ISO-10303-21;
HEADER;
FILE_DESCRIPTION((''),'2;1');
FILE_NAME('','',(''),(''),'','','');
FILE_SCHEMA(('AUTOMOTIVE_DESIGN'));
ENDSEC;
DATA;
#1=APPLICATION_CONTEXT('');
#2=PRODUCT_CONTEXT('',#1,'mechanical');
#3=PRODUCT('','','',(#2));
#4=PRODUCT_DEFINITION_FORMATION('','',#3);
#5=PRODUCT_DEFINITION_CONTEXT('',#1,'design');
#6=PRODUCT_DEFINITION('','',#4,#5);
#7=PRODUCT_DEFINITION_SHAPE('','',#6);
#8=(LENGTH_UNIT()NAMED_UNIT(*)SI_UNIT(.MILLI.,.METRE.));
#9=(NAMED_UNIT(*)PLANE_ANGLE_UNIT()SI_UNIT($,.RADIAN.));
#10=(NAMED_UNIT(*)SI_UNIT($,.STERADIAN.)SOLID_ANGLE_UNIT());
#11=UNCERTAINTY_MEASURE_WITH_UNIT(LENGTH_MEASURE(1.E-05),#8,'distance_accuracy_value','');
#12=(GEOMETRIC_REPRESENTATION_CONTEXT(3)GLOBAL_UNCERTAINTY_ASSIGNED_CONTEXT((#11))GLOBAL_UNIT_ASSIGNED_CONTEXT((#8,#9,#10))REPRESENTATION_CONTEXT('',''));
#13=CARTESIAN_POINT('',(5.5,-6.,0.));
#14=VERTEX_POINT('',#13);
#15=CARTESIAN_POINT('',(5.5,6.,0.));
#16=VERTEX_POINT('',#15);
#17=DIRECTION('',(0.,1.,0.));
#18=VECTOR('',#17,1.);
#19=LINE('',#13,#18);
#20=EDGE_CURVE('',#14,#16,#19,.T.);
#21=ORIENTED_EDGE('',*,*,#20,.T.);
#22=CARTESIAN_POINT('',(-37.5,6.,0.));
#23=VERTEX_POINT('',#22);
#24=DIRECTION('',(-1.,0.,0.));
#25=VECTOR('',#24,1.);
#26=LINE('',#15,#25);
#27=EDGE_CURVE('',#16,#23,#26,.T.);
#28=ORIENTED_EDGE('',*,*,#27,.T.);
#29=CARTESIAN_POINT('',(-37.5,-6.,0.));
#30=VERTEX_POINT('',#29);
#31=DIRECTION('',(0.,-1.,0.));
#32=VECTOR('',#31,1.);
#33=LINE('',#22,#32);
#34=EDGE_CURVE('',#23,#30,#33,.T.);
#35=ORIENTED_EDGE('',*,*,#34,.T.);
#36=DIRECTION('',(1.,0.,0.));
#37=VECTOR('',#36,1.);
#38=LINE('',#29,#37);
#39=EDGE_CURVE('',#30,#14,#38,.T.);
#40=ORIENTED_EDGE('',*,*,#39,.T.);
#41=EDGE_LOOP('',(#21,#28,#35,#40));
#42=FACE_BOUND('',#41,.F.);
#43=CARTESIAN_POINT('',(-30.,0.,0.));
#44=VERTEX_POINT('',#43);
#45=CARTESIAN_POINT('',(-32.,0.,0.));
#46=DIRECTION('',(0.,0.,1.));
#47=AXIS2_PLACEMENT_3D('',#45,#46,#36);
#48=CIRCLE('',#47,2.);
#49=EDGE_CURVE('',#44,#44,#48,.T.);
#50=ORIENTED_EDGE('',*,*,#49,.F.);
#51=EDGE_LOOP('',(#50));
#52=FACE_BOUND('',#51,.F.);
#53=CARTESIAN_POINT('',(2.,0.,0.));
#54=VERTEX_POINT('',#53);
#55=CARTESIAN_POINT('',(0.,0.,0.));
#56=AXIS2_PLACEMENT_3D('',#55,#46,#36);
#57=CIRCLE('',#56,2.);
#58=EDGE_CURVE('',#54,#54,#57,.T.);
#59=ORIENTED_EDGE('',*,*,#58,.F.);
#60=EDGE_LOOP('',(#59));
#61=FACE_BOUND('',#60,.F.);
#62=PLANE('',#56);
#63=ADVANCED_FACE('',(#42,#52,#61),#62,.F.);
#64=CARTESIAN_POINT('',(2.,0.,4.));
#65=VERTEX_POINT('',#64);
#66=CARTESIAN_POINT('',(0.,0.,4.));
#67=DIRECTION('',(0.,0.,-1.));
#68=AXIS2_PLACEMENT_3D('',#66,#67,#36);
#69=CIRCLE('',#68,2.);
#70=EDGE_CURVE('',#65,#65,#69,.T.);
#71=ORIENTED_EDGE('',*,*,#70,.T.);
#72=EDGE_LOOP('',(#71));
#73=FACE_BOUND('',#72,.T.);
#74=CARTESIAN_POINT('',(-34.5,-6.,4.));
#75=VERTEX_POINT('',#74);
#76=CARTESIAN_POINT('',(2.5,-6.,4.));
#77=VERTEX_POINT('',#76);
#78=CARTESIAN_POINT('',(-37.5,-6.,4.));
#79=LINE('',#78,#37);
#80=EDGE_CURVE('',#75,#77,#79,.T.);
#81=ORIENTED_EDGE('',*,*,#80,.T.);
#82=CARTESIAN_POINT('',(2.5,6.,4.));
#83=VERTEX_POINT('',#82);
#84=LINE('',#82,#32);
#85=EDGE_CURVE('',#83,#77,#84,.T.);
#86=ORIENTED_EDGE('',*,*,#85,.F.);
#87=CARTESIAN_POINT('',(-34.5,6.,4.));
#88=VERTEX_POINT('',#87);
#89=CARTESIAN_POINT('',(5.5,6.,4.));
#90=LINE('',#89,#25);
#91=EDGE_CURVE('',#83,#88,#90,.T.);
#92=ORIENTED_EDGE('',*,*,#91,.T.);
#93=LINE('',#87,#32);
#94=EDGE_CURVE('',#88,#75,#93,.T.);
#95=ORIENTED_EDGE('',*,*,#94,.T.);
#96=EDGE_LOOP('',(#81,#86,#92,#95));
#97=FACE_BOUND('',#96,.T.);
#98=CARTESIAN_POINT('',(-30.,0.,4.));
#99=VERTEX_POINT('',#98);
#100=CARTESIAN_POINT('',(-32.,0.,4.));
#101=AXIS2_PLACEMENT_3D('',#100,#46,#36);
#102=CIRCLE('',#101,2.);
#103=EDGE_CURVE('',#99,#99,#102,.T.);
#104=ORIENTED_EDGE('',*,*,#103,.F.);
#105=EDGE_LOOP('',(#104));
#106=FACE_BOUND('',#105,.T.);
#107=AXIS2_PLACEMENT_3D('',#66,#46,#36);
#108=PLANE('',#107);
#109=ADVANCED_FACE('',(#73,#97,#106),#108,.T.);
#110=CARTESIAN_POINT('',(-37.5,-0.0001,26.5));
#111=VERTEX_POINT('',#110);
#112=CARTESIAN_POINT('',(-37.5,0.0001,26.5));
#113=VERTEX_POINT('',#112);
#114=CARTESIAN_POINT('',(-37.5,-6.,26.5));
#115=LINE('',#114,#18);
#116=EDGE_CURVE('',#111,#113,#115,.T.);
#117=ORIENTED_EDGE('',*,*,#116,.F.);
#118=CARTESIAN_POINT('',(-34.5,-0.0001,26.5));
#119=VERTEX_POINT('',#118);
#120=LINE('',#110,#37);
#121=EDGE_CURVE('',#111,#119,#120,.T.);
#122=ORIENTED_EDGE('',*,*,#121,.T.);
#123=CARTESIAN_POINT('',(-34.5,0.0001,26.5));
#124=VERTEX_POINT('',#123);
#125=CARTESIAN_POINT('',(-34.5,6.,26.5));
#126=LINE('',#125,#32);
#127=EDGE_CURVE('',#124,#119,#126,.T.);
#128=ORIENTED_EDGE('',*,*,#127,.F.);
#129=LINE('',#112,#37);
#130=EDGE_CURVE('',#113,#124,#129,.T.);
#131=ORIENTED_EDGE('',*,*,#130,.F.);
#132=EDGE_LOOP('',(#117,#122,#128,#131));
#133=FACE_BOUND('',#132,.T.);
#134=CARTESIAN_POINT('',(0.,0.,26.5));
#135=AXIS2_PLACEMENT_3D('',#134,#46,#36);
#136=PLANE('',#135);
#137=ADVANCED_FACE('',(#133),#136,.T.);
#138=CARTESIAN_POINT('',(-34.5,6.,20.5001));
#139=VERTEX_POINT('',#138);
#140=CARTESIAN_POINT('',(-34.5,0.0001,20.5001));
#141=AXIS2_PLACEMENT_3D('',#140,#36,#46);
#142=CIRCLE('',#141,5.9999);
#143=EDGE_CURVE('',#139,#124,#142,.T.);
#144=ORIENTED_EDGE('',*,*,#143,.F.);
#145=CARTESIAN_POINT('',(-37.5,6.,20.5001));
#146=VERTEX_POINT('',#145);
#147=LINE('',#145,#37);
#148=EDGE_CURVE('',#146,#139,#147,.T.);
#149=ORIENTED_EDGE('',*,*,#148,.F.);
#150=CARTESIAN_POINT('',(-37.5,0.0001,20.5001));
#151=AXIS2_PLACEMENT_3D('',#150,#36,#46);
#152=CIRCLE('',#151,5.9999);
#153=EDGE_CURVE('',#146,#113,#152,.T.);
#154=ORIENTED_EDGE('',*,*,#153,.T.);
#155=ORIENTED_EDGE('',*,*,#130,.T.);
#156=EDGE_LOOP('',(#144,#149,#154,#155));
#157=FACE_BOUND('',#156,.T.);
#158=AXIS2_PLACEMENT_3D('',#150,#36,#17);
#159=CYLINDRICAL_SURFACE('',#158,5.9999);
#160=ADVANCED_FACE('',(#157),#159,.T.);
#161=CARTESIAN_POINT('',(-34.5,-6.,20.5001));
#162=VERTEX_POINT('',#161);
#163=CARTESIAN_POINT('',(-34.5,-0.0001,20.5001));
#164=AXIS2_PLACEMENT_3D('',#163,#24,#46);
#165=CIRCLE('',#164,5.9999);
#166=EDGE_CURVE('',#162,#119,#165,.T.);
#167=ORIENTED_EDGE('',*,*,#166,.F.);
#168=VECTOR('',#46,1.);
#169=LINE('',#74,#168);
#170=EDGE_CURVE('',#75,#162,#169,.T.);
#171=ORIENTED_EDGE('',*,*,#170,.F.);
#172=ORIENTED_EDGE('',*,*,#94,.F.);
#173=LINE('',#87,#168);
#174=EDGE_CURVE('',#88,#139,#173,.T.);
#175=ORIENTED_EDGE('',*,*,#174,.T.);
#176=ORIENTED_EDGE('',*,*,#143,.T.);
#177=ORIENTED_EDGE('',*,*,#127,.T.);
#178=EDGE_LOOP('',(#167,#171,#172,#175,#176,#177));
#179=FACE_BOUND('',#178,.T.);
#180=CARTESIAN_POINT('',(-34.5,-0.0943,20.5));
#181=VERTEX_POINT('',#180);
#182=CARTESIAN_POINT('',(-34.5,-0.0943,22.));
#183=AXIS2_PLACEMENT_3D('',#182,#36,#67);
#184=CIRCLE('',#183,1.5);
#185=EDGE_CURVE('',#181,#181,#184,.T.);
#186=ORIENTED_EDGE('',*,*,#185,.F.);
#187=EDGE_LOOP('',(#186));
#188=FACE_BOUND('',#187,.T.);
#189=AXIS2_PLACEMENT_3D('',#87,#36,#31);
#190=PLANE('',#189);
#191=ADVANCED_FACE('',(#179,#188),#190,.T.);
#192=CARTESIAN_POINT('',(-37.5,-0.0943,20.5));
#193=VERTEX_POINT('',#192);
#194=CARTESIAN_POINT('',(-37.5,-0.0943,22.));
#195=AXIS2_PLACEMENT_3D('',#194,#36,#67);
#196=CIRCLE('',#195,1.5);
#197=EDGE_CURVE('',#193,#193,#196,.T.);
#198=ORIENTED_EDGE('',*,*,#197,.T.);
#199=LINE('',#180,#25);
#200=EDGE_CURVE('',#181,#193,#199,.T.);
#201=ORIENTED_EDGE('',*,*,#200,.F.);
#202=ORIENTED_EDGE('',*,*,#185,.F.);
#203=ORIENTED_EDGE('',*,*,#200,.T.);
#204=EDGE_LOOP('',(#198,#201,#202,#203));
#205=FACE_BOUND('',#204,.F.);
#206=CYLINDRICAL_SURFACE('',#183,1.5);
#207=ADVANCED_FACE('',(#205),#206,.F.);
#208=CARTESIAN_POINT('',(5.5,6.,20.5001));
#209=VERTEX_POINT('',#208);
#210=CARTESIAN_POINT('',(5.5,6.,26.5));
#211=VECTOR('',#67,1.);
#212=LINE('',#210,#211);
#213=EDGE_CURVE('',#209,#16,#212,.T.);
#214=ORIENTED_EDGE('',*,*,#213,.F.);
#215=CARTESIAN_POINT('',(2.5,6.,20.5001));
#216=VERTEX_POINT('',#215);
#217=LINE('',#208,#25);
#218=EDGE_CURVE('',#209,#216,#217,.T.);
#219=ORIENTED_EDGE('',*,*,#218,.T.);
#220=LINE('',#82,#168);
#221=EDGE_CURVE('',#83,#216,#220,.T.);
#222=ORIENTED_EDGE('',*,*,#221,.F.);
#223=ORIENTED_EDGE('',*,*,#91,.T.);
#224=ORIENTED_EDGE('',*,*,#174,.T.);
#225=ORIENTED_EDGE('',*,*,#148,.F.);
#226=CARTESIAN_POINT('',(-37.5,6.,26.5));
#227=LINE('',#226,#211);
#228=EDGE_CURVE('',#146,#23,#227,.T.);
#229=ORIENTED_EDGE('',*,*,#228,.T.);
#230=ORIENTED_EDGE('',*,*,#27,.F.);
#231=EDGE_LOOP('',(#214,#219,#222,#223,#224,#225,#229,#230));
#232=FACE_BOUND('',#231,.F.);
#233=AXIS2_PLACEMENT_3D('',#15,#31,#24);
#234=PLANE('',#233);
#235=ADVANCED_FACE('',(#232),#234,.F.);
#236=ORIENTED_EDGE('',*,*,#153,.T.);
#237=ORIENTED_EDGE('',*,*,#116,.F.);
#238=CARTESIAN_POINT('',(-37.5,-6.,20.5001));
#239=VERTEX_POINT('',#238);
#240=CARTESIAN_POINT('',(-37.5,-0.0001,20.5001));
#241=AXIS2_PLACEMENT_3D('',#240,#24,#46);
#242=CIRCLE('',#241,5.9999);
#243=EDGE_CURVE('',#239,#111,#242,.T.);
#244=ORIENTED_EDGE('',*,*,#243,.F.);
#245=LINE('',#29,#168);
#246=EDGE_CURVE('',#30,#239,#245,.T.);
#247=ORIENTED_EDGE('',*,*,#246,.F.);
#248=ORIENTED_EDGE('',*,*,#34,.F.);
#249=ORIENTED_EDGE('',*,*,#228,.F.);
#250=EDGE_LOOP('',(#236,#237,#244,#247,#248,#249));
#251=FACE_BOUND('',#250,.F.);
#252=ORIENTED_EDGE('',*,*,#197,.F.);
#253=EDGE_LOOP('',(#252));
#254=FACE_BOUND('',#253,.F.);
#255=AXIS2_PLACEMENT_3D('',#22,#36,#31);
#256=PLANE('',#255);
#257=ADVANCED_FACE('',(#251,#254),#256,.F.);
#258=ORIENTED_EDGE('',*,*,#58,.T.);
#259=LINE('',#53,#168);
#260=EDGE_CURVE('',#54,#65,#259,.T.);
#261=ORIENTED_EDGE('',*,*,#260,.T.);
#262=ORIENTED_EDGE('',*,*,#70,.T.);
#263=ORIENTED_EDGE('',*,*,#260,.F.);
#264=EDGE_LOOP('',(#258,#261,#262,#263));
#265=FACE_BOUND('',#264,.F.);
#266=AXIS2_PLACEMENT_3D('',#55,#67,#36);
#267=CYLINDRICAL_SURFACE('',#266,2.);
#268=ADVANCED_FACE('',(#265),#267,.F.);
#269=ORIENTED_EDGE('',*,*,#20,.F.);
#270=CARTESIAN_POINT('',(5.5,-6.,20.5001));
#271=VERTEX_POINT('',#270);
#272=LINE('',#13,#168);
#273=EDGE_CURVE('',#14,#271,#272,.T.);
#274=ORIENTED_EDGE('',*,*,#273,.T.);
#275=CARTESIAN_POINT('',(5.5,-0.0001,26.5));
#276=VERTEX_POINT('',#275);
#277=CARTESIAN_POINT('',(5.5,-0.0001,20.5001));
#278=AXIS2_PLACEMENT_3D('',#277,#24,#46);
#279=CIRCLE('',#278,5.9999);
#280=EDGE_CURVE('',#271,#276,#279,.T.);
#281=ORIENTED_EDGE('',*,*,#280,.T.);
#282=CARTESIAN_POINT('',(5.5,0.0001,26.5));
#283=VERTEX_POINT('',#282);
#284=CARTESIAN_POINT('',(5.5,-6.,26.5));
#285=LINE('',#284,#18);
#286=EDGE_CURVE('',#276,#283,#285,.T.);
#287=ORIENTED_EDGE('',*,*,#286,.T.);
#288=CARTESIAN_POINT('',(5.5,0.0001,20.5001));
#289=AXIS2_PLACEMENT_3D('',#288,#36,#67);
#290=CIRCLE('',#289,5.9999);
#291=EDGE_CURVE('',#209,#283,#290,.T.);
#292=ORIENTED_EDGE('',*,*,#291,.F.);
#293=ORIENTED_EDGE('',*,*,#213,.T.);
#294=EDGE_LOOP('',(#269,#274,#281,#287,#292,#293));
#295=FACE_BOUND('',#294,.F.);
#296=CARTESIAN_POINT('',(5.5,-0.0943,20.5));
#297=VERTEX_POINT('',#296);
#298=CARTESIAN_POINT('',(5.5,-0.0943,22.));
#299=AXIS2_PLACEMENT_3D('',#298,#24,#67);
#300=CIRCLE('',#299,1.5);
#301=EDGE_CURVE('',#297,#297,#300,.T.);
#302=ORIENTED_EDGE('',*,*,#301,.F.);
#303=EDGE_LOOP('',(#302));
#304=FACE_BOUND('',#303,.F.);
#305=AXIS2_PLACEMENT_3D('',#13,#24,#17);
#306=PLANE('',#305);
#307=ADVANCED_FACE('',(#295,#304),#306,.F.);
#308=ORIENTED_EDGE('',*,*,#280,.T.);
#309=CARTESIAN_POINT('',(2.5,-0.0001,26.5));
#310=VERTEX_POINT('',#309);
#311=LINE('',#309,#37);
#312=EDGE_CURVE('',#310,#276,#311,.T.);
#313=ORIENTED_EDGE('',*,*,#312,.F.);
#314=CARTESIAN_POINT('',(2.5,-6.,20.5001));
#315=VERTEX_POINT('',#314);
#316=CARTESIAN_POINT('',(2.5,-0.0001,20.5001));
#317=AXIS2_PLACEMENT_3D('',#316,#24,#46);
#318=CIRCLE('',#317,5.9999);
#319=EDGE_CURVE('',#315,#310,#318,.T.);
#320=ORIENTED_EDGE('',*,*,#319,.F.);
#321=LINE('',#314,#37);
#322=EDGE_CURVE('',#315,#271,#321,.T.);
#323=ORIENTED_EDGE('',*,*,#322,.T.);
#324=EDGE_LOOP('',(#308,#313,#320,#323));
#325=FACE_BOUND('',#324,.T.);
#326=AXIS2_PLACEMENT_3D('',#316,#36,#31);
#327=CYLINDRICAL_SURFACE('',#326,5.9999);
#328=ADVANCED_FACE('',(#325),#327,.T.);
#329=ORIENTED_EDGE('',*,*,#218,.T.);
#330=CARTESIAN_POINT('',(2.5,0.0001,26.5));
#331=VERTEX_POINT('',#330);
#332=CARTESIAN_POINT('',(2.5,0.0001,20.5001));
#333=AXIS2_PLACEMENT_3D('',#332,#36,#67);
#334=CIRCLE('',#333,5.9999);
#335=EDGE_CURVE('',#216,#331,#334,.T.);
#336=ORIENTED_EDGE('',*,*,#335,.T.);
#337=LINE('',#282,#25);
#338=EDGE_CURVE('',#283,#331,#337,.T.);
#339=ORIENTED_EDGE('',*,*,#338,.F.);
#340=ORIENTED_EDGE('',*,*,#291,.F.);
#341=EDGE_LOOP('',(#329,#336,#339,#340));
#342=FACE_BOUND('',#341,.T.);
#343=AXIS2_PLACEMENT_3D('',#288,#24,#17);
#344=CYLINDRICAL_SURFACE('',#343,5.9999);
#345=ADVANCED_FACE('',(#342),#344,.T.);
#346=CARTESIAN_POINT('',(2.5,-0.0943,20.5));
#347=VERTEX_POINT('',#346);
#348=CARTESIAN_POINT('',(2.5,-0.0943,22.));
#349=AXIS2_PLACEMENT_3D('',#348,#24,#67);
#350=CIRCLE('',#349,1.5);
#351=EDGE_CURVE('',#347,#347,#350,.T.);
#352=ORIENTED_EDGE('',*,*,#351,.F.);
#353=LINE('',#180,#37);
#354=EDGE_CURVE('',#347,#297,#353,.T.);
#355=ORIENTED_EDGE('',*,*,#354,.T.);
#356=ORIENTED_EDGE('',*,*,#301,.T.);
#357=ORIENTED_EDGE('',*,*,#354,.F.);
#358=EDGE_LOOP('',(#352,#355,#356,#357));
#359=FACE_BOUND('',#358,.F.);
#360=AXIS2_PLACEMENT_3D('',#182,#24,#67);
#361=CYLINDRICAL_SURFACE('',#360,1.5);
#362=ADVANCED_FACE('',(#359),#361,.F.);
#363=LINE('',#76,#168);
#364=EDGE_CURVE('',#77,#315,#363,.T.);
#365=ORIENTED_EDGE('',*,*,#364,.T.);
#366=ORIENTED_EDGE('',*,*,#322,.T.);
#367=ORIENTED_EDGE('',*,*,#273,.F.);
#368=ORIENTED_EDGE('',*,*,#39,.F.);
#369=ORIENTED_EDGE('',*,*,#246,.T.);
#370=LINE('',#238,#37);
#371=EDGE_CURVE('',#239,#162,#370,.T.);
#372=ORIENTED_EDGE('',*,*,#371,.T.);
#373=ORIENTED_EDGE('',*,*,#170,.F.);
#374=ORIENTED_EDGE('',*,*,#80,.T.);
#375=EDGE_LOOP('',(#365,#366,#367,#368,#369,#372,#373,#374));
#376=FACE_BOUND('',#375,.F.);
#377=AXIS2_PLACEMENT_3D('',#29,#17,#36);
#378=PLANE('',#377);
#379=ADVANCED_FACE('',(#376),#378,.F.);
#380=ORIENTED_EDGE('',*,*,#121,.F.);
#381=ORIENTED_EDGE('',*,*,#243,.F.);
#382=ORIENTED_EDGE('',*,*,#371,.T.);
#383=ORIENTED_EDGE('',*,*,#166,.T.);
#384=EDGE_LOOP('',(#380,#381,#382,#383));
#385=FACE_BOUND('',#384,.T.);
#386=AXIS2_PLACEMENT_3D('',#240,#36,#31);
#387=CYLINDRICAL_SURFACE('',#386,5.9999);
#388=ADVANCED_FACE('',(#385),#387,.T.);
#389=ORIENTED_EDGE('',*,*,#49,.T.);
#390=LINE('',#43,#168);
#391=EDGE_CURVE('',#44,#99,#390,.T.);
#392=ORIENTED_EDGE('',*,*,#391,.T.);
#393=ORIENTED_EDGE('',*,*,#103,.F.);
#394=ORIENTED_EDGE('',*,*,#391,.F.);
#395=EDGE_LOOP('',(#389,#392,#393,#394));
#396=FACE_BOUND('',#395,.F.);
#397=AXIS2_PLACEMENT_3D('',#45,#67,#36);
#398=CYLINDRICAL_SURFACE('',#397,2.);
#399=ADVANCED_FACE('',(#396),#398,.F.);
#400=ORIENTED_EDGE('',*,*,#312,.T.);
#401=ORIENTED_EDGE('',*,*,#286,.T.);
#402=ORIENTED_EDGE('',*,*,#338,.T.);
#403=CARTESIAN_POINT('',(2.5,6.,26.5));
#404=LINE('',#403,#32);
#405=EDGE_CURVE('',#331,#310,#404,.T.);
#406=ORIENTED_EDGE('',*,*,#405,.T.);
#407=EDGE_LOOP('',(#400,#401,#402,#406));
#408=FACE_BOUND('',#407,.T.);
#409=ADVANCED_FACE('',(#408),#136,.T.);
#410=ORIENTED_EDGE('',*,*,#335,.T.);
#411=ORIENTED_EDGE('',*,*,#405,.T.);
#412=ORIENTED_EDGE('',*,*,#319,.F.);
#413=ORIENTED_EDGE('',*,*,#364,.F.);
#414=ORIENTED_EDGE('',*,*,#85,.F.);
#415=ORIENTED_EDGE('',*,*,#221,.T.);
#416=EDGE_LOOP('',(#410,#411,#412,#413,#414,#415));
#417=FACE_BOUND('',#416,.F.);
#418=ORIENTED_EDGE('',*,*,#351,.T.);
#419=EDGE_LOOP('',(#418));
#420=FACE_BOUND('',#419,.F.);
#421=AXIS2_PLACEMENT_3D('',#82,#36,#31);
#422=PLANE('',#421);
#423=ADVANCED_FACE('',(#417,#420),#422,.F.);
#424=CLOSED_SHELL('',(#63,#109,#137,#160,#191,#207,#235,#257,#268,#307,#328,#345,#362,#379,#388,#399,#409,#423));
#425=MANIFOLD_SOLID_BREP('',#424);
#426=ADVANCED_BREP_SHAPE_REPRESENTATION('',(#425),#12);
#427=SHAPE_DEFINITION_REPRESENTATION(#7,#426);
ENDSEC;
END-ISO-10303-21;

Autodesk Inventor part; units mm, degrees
ref_plane "YZ Plane" through (0, 0, 0) normal (1, 0, 0) x (0, 1, 0)
ref_plane "XZ Plane" through (0, 0, 0) normal (0, 1, 0) x (-1, 0, 0)
ref_plane "XY Plane" through (0, 0, 0) normal (0, 0, 1) x (1, 0, 0)
sketch "Szkic1" plane through (0, 0, 0) normal (0, 0, 1) x (1, 0, 0)
  line L0 (0, 0) -> (-32, 0)
  circle A0 centre (-32, 0) radius 2
  circle A1 centre (0, 0) radius 2
  line L1 (-37.5, -6) -> (5.5, -6)
  line L2 (5.5, -6) -> (5.5, 6)
  line L3 (5.5, 6) -> (-37.5, 6)
  line L4 (-37.5, 6) -> (-37.5, -6)
  line L5 (-37.5, -6) -> (5.5, 6) construction
  line L6 (5.5, -6) -> (-37.5, 6) construction
  point P0 (-16, 0)
  dimension "d2" = 32
  dimension "d3" = 4
  dimension "d4" = 4
  dimension "d5" = 43
  dimension "d6" = 12
extrude "Wyciągnięcie proste1" add sketch "Szkic1" along normal blind 4
sketch "Szkic2" plane through (0, 0, 4) normal (0, 0, 1) x (1, 0, 0)
  line L0 (5.5, -6) -> (5.5, 6) projected
  line L1 (-37.5, -6) -> (5.5, -6) projected
  line L2 (5.5, 6) -> (2.5, 6)
  line L3 (2.5, 6) -> (2.5, -6)
  line L4 (2.5, -6) -> (5.5, -6)
  line L5 (5.5, -6) -> (5.5, 6)
  line L6 (-37.5, 6) -> (-34.5, 6)
  line L7 (-34.5, 6) -> (-34.5, -6)
  line L8 (-34.5, -6) -> (-37.5, -6)
  line L9 (-37.5, -6) -> (-37.5, 6)
  dimension "d12" = 3
  dimension "d13" = 3
extrude "Wyciągnięcie proste2" add sketch "Szkic2" along normal blind 22.5
fillet "Zaokrąglenie1" radius 6 4 edges at (-36, 6, 26.5) (-36, -6, 26.5) (4, 6, 26.5) (4, -6, 26.5)
sketch "Szkic3" plane through (-34.5, -6, 4) normal (1, 0, 0) x (0, 0, -1)
  line L0 (0, 5.9057) -> (-18, 5.9057)
  circle A0 centre (-18, 5.9057) radius 1.5
  point P0 (4, 6)
  dimension "d15" = 18
  dimension "d21" = 3
extrude "Wyciągnięcie proste3" cut sketch "Szkic3" along normal mid plane 100
properties part number "Zebatka holderv2"
